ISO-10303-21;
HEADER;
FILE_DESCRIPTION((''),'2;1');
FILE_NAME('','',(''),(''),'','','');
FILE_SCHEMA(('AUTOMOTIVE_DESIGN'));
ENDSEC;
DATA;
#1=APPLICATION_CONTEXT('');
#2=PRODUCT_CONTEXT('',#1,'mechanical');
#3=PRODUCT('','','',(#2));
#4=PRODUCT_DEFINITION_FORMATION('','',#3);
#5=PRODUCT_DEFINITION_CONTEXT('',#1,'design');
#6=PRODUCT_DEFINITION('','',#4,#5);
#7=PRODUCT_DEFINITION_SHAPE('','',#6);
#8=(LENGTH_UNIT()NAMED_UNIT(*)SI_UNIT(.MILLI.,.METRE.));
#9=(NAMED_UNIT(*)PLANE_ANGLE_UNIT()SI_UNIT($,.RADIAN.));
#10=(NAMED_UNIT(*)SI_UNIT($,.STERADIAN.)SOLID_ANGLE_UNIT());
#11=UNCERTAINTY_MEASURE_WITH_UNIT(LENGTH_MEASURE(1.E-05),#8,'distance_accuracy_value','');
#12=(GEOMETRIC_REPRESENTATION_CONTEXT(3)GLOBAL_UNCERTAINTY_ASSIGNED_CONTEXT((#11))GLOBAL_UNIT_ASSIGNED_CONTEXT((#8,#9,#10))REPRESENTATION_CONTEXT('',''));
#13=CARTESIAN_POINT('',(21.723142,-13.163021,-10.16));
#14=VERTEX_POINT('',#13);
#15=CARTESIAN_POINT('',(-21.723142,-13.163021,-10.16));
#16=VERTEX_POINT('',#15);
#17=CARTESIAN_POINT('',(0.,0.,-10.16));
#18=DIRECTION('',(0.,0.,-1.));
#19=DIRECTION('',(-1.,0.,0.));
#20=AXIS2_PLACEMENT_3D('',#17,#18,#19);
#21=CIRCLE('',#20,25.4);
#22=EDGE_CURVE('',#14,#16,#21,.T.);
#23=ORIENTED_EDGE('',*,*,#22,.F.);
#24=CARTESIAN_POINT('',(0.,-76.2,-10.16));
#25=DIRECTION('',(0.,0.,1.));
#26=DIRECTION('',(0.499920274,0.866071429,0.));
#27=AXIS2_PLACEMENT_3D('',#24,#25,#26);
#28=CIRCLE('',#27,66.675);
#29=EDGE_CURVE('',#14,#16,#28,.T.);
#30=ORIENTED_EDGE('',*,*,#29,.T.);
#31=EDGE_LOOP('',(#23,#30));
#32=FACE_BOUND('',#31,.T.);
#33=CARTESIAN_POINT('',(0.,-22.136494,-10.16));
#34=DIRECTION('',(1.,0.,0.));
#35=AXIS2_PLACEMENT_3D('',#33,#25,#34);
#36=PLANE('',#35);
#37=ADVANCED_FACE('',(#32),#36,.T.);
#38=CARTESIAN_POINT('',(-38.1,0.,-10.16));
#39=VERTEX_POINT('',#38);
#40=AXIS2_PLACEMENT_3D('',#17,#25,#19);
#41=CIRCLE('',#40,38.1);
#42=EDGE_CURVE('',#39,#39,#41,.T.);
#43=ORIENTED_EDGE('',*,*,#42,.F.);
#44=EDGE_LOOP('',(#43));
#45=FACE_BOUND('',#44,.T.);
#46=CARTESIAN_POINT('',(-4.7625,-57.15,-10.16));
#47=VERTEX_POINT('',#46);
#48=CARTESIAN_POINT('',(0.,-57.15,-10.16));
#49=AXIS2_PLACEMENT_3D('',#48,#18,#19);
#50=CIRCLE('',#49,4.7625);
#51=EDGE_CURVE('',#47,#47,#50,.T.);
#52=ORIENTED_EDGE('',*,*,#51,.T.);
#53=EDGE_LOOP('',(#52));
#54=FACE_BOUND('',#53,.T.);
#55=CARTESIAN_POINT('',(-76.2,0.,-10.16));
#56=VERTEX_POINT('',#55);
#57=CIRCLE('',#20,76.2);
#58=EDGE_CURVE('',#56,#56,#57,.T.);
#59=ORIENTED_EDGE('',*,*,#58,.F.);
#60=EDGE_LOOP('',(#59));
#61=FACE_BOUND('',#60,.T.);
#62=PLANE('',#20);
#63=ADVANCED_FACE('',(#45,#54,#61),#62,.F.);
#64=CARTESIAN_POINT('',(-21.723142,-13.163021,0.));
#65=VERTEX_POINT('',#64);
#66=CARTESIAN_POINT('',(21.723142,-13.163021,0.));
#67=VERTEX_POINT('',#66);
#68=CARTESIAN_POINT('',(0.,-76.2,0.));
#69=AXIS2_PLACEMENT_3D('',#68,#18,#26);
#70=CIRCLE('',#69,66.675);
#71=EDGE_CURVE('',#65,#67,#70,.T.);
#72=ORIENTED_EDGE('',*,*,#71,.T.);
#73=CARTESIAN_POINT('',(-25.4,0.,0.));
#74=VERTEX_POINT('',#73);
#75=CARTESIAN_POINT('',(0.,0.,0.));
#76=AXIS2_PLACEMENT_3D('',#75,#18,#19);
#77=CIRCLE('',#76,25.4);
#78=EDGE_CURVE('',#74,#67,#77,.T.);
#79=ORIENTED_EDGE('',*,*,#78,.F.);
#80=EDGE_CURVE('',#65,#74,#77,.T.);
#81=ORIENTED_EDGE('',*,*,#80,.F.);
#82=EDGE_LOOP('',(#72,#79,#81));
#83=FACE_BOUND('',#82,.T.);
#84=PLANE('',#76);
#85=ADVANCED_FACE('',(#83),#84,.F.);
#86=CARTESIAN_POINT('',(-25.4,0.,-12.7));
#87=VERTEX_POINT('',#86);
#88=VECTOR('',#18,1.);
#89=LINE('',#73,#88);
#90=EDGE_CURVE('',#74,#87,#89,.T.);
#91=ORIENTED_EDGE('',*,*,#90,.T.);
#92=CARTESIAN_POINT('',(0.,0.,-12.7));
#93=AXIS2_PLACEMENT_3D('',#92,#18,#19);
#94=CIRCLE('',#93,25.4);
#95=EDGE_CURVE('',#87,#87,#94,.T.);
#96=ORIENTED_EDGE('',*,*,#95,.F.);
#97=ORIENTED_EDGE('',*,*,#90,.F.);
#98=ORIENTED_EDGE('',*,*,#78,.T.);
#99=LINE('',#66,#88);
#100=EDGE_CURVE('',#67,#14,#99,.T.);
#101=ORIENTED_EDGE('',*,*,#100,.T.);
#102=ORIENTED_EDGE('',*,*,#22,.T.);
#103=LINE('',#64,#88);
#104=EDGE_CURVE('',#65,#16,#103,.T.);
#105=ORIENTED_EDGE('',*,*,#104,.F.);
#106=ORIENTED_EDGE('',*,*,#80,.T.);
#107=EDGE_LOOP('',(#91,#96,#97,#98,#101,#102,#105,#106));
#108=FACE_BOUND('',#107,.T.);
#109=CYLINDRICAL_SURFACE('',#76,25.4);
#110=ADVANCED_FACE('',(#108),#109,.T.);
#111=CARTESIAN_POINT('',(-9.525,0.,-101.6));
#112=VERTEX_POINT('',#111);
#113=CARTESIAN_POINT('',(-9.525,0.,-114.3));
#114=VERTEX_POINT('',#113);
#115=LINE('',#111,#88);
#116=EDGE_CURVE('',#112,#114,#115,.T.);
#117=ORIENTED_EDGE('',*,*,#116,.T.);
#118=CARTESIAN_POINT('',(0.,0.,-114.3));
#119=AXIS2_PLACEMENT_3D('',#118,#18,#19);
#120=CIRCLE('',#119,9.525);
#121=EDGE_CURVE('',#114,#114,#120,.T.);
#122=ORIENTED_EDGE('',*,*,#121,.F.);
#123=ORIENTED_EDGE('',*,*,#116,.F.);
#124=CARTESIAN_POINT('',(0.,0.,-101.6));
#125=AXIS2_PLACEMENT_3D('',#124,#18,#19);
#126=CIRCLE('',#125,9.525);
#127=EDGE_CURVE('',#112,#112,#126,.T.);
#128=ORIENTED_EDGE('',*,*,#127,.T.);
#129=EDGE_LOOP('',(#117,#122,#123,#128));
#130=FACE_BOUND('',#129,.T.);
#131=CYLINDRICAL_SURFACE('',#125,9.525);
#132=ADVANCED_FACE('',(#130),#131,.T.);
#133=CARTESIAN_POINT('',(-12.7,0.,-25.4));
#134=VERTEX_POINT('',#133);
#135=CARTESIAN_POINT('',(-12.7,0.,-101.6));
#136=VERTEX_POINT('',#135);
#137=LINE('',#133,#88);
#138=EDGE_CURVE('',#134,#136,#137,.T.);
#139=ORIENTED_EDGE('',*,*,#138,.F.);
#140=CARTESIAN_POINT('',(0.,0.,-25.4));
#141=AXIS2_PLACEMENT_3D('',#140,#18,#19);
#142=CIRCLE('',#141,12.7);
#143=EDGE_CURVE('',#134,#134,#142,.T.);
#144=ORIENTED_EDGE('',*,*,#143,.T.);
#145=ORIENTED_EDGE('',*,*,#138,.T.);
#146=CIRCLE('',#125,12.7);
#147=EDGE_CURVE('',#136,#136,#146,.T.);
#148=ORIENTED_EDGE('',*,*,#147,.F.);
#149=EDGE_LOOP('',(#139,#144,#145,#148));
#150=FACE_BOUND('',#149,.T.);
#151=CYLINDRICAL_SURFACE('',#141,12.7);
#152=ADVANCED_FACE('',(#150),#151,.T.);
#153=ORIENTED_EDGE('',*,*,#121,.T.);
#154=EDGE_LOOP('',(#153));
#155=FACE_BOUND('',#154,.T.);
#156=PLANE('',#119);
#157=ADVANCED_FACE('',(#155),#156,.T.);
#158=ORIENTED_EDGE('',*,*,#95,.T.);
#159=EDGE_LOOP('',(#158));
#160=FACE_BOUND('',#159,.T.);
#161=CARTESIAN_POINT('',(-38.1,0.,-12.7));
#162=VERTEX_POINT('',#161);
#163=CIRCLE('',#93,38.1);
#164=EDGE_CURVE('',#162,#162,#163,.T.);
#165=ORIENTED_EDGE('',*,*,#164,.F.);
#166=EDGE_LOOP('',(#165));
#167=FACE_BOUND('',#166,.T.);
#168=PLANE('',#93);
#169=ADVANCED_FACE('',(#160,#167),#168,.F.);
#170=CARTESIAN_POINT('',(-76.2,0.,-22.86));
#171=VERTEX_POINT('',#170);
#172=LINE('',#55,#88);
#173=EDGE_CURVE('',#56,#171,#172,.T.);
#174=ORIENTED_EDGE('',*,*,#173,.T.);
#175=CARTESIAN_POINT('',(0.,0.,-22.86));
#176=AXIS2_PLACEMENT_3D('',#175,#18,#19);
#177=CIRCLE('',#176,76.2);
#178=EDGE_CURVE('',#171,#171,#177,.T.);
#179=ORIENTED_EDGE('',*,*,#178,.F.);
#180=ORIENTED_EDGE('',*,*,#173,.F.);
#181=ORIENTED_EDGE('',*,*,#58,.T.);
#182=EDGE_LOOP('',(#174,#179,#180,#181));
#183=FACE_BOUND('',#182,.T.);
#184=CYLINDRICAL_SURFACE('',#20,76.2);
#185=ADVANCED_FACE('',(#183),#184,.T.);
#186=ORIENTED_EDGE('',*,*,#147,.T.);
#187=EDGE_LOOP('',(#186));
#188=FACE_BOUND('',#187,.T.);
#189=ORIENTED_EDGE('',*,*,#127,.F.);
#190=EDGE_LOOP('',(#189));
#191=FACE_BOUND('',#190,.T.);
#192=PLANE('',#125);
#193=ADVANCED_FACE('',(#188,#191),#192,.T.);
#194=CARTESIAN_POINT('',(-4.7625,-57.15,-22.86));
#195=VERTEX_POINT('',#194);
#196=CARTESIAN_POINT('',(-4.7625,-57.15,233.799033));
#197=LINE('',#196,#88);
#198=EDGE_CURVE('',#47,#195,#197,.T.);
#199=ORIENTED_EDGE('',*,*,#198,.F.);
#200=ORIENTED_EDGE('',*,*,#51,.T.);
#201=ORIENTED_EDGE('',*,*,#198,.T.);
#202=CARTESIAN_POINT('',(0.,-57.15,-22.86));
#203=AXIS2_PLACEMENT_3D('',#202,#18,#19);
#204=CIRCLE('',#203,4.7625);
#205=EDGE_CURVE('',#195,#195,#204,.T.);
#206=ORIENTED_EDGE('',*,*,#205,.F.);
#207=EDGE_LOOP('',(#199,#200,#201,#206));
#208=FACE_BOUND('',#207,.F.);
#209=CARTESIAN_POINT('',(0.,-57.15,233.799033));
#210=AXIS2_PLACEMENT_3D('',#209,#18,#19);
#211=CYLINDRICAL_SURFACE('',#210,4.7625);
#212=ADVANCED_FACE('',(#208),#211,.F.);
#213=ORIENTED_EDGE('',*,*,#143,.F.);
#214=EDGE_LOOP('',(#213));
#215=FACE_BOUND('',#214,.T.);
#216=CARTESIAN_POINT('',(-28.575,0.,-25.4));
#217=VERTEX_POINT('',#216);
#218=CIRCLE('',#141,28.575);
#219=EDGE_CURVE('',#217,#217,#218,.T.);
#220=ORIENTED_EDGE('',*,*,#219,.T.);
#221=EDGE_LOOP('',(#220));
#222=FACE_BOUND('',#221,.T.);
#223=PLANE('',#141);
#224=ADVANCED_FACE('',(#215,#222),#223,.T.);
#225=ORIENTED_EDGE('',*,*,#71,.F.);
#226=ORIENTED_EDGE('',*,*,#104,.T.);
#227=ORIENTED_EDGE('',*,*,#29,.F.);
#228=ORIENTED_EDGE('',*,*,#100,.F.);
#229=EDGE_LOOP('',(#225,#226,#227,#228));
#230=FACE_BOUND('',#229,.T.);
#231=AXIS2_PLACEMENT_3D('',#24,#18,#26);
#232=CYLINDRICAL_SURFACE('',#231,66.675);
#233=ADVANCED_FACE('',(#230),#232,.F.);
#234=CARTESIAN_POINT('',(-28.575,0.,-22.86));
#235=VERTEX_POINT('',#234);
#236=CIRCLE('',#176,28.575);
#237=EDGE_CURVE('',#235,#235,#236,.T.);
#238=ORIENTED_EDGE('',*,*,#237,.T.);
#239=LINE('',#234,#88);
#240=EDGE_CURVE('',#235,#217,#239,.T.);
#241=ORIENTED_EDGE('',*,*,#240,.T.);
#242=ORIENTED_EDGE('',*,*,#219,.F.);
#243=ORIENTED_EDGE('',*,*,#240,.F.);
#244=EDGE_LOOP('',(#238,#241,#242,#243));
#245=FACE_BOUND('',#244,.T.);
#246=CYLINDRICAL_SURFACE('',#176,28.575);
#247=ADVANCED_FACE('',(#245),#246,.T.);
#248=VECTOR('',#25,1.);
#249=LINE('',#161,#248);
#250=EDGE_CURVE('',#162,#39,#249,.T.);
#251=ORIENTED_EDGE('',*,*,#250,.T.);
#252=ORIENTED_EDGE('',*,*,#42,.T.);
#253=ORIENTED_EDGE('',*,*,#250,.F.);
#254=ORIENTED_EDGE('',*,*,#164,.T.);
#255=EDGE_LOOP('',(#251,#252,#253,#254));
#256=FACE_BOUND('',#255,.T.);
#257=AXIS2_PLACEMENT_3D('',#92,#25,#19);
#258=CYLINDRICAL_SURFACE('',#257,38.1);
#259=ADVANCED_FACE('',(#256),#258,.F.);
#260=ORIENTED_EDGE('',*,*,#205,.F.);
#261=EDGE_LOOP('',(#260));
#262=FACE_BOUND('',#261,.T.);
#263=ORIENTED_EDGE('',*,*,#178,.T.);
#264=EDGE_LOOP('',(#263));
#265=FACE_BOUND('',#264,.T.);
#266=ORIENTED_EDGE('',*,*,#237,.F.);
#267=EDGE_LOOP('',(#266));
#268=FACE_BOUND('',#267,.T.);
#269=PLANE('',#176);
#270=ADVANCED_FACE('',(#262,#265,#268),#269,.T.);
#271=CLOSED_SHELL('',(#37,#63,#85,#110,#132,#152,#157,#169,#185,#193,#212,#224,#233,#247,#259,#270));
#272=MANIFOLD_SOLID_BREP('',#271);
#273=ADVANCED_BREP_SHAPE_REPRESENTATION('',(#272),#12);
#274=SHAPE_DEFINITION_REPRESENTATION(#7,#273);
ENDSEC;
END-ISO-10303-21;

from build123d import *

# Parameters (mm, degrees)
F3_DEPTH = 25.4
F5_D     = 9.525


# Not quite as in the source:
# - a length typed as a fraction of an inch, garbled in the dataset ("3 / 203.2 mm" for 3/8 in), is restored


with BuildPart() as f1:
    # F0 (on Front) → F1 (revolve)
    with BuildSketch(Plane.XZ):
        Polygon((0, -114.3), (0, 0), (-25.4, 0), (-25.4, -12.7), (-38.1, -12.7), (-38.1, -10.16), (-76.2, -10.16), (-76.2, -22.86), (-28.575, -22.86), (-28.575, -25.4), (-12.7, -25.4), (-12.7, -101.6), (-9.525, -101.6), (-9.525, -114.3), align=None)
    revolve(axis=Axis((0, 0, -53.3123221248), (0, 0, -1)))

    # F2 (on face) → F3 (cut)
    with BuildSketch(Plane.XY.offset(-10.16)):
        with BuildLine():
            ThreePointArc((-33.332184286, -18.4546875), (0, -38.1), (33.332184286, -18.4546875))
            ThreePointArc((33.332184286, -18.4546875), (0, -9.525), (-33.332184286, -18.4546875))
        make_face()
    extrude(amount=F3_DEPTH, mode=Mode.SUBTRACT)

    # F5 (through all)
    with Locations(Plane.XY.offset(-10.16)):
        with Locations((0, -57.15)):
            Hole(F5_D / 2)


solid = f1.part
